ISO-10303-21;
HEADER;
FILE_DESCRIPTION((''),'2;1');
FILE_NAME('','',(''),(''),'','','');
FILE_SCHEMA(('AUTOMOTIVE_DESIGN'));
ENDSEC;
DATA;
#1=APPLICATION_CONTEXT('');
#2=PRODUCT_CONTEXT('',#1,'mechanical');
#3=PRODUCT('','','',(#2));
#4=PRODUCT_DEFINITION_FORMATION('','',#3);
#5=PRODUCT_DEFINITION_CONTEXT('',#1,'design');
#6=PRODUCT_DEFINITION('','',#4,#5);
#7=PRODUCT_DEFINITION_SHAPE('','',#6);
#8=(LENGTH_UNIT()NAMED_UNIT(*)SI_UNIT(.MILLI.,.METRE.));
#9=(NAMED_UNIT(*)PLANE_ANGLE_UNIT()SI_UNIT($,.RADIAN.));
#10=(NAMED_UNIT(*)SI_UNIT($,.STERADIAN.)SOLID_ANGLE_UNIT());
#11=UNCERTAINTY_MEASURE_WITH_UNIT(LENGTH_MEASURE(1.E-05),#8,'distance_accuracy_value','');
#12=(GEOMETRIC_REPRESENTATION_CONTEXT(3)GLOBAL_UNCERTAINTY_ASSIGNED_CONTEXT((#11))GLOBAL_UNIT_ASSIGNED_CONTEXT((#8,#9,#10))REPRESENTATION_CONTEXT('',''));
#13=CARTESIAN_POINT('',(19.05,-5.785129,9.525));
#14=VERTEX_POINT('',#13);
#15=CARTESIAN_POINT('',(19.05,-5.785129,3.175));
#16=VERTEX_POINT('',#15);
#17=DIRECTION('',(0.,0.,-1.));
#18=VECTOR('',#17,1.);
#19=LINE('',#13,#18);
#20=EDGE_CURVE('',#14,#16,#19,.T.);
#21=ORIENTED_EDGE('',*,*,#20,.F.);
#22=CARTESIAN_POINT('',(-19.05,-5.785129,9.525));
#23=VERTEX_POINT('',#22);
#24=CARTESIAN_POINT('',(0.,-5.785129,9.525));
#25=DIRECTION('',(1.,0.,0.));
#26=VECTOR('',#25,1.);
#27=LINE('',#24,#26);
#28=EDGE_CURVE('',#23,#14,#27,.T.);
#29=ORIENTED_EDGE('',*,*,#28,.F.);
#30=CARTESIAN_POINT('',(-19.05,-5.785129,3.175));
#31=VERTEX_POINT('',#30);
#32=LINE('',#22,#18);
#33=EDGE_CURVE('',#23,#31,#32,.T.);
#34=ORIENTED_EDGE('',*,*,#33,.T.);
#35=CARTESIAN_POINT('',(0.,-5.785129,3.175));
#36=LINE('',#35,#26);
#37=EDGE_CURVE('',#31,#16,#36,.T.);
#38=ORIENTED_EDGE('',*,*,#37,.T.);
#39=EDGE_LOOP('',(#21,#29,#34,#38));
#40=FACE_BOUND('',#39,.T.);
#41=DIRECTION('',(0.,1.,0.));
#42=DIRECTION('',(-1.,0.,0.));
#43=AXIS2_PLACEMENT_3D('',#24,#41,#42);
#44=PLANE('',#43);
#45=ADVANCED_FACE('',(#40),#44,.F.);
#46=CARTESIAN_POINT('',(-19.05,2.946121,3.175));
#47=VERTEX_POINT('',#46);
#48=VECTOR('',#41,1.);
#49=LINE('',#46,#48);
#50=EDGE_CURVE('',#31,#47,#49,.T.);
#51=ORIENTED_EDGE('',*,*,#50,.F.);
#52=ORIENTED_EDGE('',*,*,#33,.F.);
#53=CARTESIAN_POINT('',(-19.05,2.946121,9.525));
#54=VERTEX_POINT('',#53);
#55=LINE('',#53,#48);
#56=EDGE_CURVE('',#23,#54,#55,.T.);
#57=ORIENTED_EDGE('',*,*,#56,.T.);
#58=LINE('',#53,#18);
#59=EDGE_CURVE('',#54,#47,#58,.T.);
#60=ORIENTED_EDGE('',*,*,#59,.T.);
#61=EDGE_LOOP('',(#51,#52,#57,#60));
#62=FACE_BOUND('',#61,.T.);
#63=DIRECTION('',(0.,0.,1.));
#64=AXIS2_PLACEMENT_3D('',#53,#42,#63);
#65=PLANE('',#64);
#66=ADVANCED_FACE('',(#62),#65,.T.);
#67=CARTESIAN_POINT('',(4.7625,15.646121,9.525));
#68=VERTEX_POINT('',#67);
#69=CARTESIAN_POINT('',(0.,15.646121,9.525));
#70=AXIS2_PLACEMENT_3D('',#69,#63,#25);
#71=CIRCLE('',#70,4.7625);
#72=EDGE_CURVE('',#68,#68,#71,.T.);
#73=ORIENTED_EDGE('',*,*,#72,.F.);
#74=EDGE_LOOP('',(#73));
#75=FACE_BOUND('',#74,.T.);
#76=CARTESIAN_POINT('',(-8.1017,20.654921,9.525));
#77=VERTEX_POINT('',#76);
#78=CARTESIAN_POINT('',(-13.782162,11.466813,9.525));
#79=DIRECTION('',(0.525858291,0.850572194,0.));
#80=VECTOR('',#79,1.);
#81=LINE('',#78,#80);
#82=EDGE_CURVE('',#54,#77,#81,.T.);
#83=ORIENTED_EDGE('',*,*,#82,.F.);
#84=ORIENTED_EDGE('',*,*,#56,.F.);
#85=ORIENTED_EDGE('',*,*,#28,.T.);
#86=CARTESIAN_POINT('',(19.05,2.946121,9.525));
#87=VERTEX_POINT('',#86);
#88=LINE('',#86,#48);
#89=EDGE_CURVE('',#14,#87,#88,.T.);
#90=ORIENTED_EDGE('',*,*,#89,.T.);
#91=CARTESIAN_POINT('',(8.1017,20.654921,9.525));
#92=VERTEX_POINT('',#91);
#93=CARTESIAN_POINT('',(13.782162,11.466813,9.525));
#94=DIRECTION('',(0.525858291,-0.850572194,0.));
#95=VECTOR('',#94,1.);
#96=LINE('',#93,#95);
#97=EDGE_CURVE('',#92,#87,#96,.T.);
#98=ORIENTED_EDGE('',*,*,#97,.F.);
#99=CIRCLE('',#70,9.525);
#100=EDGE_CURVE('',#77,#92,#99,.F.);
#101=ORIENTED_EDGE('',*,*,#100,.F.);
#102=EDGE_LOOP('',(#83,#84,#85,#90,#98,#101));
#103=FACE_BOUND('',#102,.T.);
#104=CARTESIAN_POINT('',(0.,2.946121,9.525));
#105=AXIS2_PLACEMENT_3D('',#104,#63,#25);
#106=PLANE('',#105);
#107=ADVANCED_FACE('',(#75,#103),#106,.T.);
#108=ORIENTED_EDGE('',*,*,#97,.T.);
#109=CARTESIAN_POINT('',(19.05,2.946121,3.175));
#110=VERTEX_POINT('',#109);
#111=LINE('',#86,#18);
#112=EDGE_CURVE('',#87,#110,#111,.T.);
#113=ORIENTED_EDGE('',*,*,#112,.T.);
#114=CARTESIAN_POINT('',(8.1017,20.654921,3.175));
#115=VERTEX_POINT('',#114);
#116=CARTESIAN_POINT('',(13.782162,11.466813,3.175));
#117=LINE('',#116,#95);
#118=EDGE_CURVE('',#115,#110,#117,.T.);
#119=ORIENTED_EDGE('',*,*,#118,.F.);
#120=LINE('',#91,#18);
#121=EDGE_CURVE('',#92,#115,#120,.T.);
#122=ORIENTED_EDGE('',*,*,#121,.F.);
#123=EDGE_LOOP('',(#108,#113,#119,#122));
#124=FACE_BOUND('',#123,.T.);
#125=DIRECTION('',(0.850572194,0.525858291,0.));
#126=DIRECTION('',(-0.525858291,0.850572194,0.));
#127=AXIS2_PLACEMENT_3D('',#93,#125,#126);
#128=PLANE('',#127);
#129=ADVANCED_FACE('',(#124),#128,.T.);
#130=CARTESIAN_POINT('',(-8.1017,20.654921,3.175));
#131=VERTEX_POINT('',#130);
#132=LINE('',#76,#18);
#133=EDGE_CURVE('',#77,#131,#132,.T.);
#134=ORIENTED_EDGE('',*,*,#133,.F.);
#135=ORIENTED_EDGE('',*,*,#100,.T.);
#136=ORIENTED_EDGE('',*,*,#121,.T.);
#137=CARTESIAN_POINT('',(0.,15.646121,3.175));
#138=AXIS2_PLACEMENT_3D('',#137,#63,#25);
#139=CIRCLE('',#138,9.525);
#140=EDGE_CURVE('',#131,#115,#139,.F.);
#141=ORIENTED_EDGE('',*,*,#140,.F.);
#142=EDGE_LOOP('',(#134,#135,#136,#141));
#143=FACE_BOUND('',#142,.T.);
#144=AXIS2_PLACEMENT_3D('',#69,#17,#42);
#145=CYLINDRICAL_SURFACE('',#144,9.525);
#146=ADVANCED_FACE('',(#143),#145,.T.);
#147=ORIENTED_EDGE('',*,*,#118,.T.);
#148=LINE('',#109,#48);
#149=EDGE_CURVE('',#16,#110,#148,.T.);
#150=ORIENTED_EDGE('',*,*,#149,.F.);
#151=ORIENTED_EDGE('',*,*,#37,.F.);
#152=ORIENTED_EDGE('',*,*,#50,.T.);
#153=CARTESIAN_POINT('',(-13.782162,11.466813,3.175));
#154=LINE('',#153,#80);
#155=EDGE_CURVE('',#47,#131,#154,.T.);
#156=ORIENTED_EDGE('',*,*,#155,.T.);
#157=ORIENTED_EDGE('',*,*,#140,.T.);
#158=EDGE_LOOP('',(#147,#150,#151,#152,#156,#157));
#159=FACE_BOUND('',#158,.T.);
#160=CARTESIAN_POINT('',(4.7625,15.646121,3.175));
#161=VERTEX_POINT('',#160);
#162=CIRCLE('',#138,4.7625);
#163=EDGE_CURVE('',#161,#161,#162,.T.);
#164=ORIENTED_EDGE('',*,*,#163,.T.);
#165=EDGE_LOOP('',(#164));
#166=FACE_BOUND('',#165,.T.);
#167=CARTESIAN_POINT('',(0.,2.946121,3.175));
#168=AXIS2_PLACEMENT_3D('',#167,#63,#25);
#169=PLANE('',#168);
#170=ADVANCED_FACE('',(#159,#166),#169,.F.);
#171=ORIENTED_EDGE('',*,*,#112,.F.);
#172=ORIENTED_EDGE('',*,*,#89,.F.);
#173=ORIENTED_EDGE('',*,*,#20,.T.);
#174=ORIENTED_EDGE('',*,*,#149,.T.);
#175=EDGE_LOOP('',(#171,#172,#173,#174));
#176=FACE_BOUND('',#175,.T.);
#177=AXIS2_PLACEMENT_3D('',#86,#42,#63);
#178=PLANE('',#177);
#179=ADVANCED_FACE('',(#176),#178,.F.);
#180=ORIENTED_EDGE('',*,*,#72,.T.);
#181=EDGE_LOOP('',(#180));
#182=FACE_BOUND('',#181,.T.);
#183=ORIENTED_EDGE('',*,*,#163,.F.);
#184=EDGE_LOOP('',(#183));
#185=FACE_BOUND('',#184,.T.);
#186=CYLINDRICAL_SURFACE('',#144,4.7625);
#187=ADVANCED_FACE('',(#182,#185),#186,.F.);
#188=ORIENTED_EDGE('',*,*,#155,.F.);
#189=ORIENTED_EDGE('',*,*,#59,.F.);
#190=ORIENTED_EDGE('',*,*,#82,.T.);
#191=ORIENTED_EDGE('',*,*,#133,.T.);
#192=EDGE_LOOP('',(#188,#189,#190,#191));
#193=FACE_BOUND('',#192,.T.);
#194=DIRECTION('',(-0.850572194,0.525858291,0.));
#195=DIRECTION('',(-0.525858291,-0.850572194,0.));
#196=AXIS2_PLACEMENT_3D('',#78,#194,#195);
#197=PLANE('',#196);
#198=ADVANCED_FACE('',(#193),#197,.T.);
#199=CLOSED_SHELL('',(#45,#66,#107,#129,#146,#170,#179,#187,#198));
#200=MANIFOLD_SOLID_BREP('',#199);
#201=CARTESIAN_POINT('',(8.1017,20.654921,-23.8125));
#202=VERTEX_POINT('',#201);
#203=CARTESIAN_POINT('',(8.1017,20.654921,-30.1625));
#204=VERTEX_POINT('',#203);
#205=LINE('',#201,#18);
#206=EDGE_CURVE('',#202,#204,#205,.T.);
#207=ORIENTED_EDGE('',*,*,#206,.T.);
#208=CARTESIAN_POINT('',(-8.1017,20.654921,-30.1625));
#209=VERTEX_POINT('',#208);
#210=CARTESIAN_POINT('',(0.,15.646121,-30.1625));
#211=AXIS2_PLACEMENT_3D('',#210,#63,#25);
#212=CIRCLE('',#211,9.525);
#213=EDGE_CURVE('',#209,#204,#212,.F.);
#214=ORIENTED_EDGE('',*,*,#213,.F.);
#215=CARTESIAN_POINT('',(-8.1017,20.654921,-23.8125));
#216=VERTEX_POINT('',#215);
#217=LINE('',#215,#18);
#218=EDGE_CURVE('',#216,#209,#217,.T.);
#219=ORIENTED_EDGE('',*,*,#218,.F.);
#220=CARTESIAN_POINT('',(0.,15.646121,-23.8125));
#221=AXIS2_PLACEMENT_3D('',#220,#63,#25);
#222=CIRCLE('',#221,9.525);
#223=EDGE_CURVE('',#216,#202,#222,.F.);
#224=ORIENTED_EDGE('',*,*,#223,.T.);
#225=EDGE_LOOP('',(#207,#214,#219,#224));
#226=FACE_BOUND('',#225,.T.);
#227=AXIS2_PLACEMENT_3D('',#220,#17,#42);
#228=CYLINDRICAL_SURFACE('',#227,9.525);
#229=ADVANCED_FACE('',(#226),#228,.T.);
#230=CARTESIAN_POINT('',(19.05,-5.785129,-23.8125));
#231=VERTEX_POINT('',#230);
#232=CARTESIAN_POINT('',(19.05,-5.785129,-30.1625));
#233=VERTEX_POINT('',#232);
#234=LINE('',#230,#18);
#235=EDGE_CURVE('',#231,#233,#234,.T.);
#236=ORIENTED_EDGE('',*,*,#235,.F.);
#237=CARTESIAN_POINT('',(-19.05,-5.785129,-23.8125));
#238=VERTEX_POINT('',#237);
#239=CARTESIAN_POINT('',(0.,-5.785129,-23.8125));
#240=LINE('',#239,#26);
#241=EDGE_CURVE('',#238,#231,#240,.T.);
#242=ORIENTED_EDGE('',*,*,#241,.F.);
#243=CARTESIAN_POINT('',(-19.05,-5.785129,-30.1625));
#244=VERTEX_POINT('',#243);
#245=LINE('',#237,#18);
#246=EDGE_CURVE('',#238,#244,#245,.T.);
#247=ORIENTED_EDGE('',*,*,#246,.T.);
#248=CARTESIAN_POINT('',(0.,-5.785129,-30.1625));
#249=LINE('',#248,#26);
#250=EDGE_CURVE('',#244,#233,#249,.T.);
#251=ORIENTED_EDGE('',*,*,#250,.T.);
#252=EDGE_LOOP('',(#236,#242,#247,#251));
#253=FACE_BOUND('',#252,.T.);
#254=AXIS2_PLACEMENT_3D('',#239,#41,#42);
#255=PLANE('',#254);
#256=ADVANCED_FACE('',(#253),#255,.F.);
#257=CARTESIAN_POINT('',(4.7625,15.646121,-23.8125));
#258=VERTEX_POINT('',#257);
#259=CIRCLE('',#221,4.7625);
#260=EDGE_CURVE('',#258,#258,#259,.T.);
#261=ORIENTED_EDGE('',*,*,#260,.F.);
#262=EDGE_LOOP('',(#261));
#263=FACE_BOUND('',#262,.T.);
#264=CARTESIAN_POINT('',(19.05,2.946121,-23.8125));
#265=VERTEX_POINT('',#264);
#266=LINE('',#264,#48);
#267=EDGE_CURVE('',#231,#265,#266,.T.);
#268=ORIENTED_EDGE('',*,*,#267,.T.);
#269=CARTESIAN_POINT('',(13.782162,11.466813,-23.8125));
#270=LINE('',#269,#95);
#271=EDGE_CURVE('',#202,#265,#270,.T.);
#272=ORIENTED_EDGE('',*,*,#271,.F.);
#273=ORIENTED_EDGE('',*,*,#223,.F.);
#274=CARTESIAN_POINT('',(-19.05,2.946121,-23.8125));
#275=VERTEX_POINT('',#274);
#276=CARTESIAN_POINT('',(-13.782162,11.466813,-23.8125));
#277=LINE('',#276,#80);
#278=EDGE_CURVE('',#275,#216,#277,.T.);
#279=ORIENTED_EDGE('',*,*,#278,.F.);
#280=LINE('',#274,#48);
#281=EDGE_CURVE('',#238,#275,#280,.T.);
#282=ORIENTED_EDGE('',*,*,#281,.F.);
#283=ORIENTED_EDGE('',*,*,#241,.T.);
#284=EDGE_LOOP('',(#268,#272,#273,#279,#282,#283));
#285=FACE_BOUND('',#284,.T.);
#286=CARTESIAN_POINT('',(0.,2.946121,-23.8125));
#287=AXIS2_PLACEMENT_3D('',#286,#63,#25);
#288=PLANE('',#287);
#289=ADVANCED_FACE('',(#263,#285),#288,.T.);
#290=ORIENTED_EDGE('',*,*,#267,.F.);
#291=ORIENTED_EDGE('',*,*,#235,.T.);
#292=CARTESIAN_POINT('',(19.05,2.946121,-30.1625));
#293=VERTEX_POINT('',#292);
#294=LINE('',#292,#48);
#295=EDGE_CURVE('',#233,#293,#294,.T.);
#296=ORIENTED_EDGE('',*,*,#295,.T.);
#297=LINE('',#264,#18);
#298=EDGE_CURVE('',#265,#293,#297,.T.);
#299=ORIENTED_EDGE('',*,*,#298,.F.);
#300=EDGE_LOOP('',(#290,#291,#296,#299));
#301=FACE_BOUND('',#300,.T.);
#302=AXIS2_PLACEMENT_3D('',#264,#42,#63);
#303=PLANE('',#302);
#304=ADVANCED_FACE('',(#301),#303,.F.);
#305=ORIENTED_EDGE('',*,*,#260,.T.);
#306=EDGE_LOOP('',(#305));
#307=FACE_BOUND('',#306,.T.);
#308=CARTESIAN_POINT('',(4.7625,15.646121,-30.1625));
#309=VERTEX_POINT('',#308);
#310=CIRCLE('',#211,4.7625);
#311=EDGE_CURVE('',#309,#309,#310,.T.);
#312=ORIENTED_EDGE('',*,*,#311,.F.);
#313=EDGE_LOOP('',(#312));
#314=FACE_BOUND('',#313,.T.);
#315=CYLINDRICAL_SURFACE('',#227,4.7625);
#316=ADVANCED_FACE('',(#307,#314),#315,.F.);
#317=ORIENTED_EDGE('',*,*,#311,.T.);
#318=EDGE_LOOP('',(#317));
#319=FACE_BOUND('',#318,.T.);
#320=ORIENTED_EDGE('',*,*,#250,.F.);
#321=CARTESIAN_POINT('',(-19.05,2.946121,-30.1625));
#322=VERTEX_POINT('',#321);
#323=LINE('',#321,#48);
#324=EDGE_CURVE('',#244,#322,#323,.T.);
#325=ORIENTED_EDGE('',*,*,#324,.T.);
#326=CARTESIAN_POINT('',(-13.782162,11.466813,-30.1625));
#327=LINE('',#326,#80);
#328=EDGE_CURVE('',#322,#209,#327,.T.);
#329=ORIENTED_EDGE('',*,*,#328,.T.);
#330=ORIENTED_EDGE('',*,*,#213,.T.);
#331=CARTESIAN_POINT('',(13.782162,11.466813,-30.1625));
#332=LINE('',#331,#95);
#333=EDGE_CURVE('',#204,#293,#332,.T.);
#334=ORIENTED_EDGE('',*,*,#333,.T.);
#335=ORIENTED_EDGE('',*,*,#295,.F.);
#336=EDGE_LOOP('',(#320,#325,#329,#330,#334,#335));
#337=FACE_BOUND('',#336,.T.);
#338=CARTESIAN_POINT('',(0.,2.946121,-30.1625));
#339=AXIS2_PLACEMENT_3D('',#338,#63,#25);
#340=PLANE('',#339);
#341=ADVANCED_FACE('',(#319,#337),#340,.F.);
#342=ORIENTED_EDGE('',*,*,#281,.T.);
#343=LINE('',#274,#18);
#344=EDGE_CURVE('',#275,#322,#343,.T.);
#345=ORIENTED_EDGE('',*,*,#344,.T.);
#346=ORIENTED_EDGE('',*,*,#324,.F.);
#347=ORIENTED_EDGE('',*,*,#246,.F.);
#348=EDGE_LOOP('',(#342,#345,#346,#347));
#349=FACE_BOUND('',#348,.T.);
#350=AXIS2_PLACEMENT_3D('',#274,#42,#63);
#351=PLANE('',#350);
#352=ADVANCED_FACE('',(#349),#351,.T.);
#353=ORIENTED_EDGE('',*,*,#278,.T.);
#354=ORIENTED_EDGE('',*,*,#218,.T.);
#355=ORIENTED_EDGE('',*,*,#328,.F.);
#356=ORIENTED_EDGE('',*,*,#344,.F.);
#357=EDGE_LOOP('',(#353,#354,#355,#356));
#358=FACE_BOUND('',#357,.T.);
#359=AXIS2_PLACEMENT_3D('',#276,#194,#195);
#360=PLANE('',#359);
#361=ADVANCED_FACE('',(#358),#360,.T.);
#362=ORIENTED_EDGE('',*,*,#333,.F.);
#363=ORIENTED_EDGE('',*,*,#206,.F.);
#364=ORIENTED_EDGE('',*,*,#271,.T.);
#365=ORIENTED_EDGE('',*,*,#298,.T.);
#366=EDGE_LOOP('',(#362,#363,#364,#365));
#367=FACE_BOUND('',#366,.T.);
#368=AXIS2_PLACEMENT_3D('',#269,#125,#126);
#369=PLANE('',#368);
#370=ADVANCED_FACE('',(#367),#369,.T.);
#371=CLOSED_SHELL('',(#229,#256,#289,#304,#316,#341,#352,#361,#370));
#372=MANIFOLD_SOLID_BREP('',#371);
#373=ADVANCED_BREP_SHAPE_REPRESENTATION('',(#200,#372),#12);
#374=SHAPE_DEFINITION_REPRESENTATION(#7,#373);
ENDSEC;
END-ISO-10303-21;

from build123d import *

# Parameters (mm, degrees)
SKETCH1_R           = 9.525
SKETCH1_W           = 76.2
SKETCH1_H           = 17.4625
BOSS_EXTRUDE1_DEPTH = 12.7
LPATTERN1_COUNT     = 2
LPATTERN1_PITCH     = 33.3375
SCALE1_START        = -33.3375
SCALE1_DEPTH        = 46.0375
SCALE1_START_2      = -23.8125
SCALE1_2_DEPTH      = 26.9875
SCALE1_3_DEPTH      = 3.175
SCALE1_START_3      = 9.525
SCALE1_4_DEPTH      = 3.175
SCALE1_START_4      = -30.1625
SCALE1_5_DEPTH      = 6.35
SCALE1_START_5      = 3.175
SCALE1_6_DEPTH      = 6.35


# Read off the part's stored shape, not the designer's step: Scale1
with BuildPart() as part:
    # Sketch1 → Boss-Extrude1 (new body)
    # profile 1 of 2: a face of its own
    with BuildSketch(Plane.XY):
        with BuildLine():
            ThreePointArc((-16.203400299, 35.417600449), (0, 44.45), (16.203400299, 35.417600449))
            Line((16.203400299, 35.417600449), (38.1, 0))
            Line((38.1, 0), (-38.1, 0))
            Line((-38.1, 0), (-16.203400299, 35.417600449))
        make_face()
        with Locations((0, 25.4)):
            Circle(SKETCH1_R, mode=Mode.SUBTRACT)
    # profile 2 of 2: a face of its own
    with BuildSketch(Plane.XY):
        with Locations((0, -8.73125)):
            Rectangle(SKETCH1_W, SKETCH1_H)
    extrude(amount=BOSS_EXTRUDE1_DEPTH)


with BuildPart() as lpattern1_1:
    # LPattern1: pattern copy
    add(part.part.moved(Location(Vector(0, 0, -1) * (1 * LPATTERN1_PITCH))))


with BuildPart() as scale1_tool:
    # Scale1 outline → Scale1 (new body)
    # profile 1 of 2: a face of its own
    with BuildSketch(Plane.XY.offset(SCALE1_START)):
        with BuildLine():
            ThreePointArc((16.203400299, 35.417600449), (0, 44.45), (-16.203400299, 35.417600449))
            Line((-16.203400299, 35.417600449), (-38.1, 0))
            Line((-38.1, 0), (-38.1, -17.4625))
            Line((-38.1, -17.4625), (38.1, -17.4625))
            Line((38.1, -17.4625), (38.1, 0))
            Line((38.1, 0), (16.203400299, 35.417600449))
        make_face()
        with BuildLine():
            Line((-19.05, 2.946121023), (-8.182474067, 20.524269988))
            ThreePointArc((-8.182474067, 20.524269988), (0, 34.925), (8.182474067, 20.524269988))
            Line((8.182474067, 20.524269988), (19.05, 2.946121023))
            Line((19.05, 2.946121023), (19.05, -5.785128977))
            Line((19.05, -5.785128977), (-19.05, -5.785128977))
            Line((-19.05, -5.785128977), (-19.05, 2.946121023))
        make_face(mode=Mode.SUBTRACT)
    # profile 2 of 2: a face of its own
    with BuildSketch(Plane.XY.offset(SCALE1_START)):
        with BuildLine():
            ThreePointArc((4.555482234, 17.035001099), (0, 15.875), (-4.555482234, 17.035001099))
            ThreePointArc((-4.555482234, 17.035001099), (0, 10.883621023), (4.555482234, 17.035001099))
        make_face()
    extrude(amount=SCALE1_DEPTH)


with BuildPart() as part_1:
    add(part.part)

    # Scale1: cut by scale1_tool
    add(scale1_tool.part, mode=Mode.SUBTRACT)


with BuildPart() as lpattern1_1_1:
    add(lpattern1_1.part)

    # Scale1: cut by scale1_tool
    add(scale1_tool.part, mode=Mode.SUBTRACT)


with BuildPart() as scale1_2_tool:
    # Scale1 2 outline → Scale1 2 (new body)
    with BuildSketch(Plane.XY.offset(SCALE1_START_2)):
        with BuildLine():
            ThreePointArc((-4.555482234, 17.035001099), (-6.603607501, 18.535745272), (-8.182474067, 20.524269988))
            Line((-8.182474067, 20.524269988), (-19.05, 2.946121023))
            Line((-19.05, 2.946121023), (-19.05, -5.785128977))
            Line((-19.05, -5.785128977), (19.05, -5.785128977))
            Line((19.05, -5.785128977), (19.05, 2.946121023))
            Line((19.05, 2.946121023), (8.182474067, 20.524269988))
            ThreePointArc((8.182474067, 20.524269988), (6.603607501, 18.535745272), (4.555482234, 17.035001099))
            ThreePointArc((4.555482234, 17.035001099), (0, 10.883621023), (-4.555482234, 17.035001099))
        make_face()
    extrude(amount=SCALE1_2_DEPTH)


with BuildPart() as part_2:
    add(part_1.part)

    # Scale1 2: cut by scale1_2_tool
    add(scale1_2_tool.part, mode=Mode.SUBTRACT)

    # Scale1 4 outline → Scale1 4 (cut)
    with BuildSketch(Plane.XY.offset(SCALE1_START_3)):
        with BuildLine():
            ThreePointArc((-4.555482234, 17.035001099), (-6.603607501, 18.535745272), (-8.182474067, 20.524269988))
            Line((-8.182474067, 20.524269988), (-19.05, 2.946121023))
            Line((-19.05, 2.946121023), (-19.05, -5.785128977))
            Line((-19.05, -5.785128977), (19.05, -5.785128977))
            Line((19.05, -5.785128977), (19.05, 2.946121023))
            Line((19.05, 2.946121023), (8.182474067, 20.524269988))
            ThreePointArc((8.182474067, 20.524269988), (6.603607501, 18.535745272), (4.555482234, 17.035001099))
            ThreePointArc((4.555482234, 17.035001099), (0, 10.883621023), (-4.555482234, 17.035001099))
        make_face()
    extrude(amount=SCALE1_4_DEPTH, mode=Mode.SUBTRACT)


with BuildPart() as lpattern1_1_2:
    add(lpattern1_1_1.part)

    # Scale1 2: cut by scale1_2_tool
    add(scale1_2_tool.part, mode=Mode.SUBTRACT)

    # Scale1 3 outline → Scale1 3 (cut)
    with BuildSketch(Plane.XY.offset(SCALE1_START)):
        with BuildLine():
            ThreePointArc((-4.555482234, 17.035001099), (-6.603607501, 18.535745272), (-8.182474067, 20.524269988))
            Line((-8.182474067, 20.524269988), (-19.05, 2.946121023))
            Line((-19.05, 2.946121023), (-19.05, -5.785128977))
            Line((-19.05, -5.785128977), (19.05, -5.785128977))
            Line((19.05, -5.785128977), (19.05, 2.946121023))
            Line((19.05, 2.946121023), (8.182474067, 20.524269988))
            ThreePointArc((8.182474067, 20.524269988), (6.603607501, 18.535745272), (4.555482234, 17.035001099))
            ThreePointArc((4.555482234, 17.035001099), (0, 10.883621023), (-4.555482234, 17.035001099))
        make_face()
    extrude(amount=SCALE1_3_DEPTH, mode=Mode.SUBTRACT)


    add(part_2.part)  # Scale1 5 merges part
    # Scale1 5 outline → Scale1 5 (add)
    with BuildSketch(Plane.XY.offset(SCALE1_START_4)):
        with BuildLine():
            ThreePointArc((8.10170015, 20.654921247), (0, 25.171121023), (-8.10170015, 20.654921247))
            Line((-8.10170015, 20.654921247), (-8.182474067, 20.524269988))
            ThreePointArc((-8.182474067, 20.524269988), (-6.603607501, 18.535745272), (-4.555482234, 17.035001099))
            ThreePointArc((-4.555482234, 17.035001099), (0, 20.408621023), (4.555482234, 17.035001099))
            ThreePointArc((4.555482234, 17.035001099), (6.603607501, 18.535745272), (8.182474067, 20.524269988))
            Line((8.182474067, 20.524269988), (8.10170015, 20.654921247))
        make_face()
    extrude(amount=SCALE1_5_DEPTH)

    # Scale1 6 outline → Scale1 6 (add)
    with BuildSketch(Plane.XY.offset(SCALE1_START_5)):
        with BuildLine():
            ThreePointArc((8.10170015, 20.654921247), (0, 25.171121023), (-8.10170015, 20.654921247))
            Line((-8.10170015, 20.654921247), (-8.182474067, 20.524269988))
            ThreePointArc((-8.182474067, 20.524269988), (-6.603607501, 18.535745272), (-4.555482234, 17.035001099))
            ThreePointArc((-4.555482234, 17.035001099), (0, 20.408621023), (4.555482234, 17.035001099))
            ThreePointArc((4.555482234, 17.035001099), (6.603607501, 18.535745272), (8.182474067, 20.524269988))
            Line((8.182474067, 20.524269988), (8.10170015, 20.654921247))
        make_face()
    extrude(amount=SCALE1_6_DEPTH)


solid = lpattern1_1_2.part
